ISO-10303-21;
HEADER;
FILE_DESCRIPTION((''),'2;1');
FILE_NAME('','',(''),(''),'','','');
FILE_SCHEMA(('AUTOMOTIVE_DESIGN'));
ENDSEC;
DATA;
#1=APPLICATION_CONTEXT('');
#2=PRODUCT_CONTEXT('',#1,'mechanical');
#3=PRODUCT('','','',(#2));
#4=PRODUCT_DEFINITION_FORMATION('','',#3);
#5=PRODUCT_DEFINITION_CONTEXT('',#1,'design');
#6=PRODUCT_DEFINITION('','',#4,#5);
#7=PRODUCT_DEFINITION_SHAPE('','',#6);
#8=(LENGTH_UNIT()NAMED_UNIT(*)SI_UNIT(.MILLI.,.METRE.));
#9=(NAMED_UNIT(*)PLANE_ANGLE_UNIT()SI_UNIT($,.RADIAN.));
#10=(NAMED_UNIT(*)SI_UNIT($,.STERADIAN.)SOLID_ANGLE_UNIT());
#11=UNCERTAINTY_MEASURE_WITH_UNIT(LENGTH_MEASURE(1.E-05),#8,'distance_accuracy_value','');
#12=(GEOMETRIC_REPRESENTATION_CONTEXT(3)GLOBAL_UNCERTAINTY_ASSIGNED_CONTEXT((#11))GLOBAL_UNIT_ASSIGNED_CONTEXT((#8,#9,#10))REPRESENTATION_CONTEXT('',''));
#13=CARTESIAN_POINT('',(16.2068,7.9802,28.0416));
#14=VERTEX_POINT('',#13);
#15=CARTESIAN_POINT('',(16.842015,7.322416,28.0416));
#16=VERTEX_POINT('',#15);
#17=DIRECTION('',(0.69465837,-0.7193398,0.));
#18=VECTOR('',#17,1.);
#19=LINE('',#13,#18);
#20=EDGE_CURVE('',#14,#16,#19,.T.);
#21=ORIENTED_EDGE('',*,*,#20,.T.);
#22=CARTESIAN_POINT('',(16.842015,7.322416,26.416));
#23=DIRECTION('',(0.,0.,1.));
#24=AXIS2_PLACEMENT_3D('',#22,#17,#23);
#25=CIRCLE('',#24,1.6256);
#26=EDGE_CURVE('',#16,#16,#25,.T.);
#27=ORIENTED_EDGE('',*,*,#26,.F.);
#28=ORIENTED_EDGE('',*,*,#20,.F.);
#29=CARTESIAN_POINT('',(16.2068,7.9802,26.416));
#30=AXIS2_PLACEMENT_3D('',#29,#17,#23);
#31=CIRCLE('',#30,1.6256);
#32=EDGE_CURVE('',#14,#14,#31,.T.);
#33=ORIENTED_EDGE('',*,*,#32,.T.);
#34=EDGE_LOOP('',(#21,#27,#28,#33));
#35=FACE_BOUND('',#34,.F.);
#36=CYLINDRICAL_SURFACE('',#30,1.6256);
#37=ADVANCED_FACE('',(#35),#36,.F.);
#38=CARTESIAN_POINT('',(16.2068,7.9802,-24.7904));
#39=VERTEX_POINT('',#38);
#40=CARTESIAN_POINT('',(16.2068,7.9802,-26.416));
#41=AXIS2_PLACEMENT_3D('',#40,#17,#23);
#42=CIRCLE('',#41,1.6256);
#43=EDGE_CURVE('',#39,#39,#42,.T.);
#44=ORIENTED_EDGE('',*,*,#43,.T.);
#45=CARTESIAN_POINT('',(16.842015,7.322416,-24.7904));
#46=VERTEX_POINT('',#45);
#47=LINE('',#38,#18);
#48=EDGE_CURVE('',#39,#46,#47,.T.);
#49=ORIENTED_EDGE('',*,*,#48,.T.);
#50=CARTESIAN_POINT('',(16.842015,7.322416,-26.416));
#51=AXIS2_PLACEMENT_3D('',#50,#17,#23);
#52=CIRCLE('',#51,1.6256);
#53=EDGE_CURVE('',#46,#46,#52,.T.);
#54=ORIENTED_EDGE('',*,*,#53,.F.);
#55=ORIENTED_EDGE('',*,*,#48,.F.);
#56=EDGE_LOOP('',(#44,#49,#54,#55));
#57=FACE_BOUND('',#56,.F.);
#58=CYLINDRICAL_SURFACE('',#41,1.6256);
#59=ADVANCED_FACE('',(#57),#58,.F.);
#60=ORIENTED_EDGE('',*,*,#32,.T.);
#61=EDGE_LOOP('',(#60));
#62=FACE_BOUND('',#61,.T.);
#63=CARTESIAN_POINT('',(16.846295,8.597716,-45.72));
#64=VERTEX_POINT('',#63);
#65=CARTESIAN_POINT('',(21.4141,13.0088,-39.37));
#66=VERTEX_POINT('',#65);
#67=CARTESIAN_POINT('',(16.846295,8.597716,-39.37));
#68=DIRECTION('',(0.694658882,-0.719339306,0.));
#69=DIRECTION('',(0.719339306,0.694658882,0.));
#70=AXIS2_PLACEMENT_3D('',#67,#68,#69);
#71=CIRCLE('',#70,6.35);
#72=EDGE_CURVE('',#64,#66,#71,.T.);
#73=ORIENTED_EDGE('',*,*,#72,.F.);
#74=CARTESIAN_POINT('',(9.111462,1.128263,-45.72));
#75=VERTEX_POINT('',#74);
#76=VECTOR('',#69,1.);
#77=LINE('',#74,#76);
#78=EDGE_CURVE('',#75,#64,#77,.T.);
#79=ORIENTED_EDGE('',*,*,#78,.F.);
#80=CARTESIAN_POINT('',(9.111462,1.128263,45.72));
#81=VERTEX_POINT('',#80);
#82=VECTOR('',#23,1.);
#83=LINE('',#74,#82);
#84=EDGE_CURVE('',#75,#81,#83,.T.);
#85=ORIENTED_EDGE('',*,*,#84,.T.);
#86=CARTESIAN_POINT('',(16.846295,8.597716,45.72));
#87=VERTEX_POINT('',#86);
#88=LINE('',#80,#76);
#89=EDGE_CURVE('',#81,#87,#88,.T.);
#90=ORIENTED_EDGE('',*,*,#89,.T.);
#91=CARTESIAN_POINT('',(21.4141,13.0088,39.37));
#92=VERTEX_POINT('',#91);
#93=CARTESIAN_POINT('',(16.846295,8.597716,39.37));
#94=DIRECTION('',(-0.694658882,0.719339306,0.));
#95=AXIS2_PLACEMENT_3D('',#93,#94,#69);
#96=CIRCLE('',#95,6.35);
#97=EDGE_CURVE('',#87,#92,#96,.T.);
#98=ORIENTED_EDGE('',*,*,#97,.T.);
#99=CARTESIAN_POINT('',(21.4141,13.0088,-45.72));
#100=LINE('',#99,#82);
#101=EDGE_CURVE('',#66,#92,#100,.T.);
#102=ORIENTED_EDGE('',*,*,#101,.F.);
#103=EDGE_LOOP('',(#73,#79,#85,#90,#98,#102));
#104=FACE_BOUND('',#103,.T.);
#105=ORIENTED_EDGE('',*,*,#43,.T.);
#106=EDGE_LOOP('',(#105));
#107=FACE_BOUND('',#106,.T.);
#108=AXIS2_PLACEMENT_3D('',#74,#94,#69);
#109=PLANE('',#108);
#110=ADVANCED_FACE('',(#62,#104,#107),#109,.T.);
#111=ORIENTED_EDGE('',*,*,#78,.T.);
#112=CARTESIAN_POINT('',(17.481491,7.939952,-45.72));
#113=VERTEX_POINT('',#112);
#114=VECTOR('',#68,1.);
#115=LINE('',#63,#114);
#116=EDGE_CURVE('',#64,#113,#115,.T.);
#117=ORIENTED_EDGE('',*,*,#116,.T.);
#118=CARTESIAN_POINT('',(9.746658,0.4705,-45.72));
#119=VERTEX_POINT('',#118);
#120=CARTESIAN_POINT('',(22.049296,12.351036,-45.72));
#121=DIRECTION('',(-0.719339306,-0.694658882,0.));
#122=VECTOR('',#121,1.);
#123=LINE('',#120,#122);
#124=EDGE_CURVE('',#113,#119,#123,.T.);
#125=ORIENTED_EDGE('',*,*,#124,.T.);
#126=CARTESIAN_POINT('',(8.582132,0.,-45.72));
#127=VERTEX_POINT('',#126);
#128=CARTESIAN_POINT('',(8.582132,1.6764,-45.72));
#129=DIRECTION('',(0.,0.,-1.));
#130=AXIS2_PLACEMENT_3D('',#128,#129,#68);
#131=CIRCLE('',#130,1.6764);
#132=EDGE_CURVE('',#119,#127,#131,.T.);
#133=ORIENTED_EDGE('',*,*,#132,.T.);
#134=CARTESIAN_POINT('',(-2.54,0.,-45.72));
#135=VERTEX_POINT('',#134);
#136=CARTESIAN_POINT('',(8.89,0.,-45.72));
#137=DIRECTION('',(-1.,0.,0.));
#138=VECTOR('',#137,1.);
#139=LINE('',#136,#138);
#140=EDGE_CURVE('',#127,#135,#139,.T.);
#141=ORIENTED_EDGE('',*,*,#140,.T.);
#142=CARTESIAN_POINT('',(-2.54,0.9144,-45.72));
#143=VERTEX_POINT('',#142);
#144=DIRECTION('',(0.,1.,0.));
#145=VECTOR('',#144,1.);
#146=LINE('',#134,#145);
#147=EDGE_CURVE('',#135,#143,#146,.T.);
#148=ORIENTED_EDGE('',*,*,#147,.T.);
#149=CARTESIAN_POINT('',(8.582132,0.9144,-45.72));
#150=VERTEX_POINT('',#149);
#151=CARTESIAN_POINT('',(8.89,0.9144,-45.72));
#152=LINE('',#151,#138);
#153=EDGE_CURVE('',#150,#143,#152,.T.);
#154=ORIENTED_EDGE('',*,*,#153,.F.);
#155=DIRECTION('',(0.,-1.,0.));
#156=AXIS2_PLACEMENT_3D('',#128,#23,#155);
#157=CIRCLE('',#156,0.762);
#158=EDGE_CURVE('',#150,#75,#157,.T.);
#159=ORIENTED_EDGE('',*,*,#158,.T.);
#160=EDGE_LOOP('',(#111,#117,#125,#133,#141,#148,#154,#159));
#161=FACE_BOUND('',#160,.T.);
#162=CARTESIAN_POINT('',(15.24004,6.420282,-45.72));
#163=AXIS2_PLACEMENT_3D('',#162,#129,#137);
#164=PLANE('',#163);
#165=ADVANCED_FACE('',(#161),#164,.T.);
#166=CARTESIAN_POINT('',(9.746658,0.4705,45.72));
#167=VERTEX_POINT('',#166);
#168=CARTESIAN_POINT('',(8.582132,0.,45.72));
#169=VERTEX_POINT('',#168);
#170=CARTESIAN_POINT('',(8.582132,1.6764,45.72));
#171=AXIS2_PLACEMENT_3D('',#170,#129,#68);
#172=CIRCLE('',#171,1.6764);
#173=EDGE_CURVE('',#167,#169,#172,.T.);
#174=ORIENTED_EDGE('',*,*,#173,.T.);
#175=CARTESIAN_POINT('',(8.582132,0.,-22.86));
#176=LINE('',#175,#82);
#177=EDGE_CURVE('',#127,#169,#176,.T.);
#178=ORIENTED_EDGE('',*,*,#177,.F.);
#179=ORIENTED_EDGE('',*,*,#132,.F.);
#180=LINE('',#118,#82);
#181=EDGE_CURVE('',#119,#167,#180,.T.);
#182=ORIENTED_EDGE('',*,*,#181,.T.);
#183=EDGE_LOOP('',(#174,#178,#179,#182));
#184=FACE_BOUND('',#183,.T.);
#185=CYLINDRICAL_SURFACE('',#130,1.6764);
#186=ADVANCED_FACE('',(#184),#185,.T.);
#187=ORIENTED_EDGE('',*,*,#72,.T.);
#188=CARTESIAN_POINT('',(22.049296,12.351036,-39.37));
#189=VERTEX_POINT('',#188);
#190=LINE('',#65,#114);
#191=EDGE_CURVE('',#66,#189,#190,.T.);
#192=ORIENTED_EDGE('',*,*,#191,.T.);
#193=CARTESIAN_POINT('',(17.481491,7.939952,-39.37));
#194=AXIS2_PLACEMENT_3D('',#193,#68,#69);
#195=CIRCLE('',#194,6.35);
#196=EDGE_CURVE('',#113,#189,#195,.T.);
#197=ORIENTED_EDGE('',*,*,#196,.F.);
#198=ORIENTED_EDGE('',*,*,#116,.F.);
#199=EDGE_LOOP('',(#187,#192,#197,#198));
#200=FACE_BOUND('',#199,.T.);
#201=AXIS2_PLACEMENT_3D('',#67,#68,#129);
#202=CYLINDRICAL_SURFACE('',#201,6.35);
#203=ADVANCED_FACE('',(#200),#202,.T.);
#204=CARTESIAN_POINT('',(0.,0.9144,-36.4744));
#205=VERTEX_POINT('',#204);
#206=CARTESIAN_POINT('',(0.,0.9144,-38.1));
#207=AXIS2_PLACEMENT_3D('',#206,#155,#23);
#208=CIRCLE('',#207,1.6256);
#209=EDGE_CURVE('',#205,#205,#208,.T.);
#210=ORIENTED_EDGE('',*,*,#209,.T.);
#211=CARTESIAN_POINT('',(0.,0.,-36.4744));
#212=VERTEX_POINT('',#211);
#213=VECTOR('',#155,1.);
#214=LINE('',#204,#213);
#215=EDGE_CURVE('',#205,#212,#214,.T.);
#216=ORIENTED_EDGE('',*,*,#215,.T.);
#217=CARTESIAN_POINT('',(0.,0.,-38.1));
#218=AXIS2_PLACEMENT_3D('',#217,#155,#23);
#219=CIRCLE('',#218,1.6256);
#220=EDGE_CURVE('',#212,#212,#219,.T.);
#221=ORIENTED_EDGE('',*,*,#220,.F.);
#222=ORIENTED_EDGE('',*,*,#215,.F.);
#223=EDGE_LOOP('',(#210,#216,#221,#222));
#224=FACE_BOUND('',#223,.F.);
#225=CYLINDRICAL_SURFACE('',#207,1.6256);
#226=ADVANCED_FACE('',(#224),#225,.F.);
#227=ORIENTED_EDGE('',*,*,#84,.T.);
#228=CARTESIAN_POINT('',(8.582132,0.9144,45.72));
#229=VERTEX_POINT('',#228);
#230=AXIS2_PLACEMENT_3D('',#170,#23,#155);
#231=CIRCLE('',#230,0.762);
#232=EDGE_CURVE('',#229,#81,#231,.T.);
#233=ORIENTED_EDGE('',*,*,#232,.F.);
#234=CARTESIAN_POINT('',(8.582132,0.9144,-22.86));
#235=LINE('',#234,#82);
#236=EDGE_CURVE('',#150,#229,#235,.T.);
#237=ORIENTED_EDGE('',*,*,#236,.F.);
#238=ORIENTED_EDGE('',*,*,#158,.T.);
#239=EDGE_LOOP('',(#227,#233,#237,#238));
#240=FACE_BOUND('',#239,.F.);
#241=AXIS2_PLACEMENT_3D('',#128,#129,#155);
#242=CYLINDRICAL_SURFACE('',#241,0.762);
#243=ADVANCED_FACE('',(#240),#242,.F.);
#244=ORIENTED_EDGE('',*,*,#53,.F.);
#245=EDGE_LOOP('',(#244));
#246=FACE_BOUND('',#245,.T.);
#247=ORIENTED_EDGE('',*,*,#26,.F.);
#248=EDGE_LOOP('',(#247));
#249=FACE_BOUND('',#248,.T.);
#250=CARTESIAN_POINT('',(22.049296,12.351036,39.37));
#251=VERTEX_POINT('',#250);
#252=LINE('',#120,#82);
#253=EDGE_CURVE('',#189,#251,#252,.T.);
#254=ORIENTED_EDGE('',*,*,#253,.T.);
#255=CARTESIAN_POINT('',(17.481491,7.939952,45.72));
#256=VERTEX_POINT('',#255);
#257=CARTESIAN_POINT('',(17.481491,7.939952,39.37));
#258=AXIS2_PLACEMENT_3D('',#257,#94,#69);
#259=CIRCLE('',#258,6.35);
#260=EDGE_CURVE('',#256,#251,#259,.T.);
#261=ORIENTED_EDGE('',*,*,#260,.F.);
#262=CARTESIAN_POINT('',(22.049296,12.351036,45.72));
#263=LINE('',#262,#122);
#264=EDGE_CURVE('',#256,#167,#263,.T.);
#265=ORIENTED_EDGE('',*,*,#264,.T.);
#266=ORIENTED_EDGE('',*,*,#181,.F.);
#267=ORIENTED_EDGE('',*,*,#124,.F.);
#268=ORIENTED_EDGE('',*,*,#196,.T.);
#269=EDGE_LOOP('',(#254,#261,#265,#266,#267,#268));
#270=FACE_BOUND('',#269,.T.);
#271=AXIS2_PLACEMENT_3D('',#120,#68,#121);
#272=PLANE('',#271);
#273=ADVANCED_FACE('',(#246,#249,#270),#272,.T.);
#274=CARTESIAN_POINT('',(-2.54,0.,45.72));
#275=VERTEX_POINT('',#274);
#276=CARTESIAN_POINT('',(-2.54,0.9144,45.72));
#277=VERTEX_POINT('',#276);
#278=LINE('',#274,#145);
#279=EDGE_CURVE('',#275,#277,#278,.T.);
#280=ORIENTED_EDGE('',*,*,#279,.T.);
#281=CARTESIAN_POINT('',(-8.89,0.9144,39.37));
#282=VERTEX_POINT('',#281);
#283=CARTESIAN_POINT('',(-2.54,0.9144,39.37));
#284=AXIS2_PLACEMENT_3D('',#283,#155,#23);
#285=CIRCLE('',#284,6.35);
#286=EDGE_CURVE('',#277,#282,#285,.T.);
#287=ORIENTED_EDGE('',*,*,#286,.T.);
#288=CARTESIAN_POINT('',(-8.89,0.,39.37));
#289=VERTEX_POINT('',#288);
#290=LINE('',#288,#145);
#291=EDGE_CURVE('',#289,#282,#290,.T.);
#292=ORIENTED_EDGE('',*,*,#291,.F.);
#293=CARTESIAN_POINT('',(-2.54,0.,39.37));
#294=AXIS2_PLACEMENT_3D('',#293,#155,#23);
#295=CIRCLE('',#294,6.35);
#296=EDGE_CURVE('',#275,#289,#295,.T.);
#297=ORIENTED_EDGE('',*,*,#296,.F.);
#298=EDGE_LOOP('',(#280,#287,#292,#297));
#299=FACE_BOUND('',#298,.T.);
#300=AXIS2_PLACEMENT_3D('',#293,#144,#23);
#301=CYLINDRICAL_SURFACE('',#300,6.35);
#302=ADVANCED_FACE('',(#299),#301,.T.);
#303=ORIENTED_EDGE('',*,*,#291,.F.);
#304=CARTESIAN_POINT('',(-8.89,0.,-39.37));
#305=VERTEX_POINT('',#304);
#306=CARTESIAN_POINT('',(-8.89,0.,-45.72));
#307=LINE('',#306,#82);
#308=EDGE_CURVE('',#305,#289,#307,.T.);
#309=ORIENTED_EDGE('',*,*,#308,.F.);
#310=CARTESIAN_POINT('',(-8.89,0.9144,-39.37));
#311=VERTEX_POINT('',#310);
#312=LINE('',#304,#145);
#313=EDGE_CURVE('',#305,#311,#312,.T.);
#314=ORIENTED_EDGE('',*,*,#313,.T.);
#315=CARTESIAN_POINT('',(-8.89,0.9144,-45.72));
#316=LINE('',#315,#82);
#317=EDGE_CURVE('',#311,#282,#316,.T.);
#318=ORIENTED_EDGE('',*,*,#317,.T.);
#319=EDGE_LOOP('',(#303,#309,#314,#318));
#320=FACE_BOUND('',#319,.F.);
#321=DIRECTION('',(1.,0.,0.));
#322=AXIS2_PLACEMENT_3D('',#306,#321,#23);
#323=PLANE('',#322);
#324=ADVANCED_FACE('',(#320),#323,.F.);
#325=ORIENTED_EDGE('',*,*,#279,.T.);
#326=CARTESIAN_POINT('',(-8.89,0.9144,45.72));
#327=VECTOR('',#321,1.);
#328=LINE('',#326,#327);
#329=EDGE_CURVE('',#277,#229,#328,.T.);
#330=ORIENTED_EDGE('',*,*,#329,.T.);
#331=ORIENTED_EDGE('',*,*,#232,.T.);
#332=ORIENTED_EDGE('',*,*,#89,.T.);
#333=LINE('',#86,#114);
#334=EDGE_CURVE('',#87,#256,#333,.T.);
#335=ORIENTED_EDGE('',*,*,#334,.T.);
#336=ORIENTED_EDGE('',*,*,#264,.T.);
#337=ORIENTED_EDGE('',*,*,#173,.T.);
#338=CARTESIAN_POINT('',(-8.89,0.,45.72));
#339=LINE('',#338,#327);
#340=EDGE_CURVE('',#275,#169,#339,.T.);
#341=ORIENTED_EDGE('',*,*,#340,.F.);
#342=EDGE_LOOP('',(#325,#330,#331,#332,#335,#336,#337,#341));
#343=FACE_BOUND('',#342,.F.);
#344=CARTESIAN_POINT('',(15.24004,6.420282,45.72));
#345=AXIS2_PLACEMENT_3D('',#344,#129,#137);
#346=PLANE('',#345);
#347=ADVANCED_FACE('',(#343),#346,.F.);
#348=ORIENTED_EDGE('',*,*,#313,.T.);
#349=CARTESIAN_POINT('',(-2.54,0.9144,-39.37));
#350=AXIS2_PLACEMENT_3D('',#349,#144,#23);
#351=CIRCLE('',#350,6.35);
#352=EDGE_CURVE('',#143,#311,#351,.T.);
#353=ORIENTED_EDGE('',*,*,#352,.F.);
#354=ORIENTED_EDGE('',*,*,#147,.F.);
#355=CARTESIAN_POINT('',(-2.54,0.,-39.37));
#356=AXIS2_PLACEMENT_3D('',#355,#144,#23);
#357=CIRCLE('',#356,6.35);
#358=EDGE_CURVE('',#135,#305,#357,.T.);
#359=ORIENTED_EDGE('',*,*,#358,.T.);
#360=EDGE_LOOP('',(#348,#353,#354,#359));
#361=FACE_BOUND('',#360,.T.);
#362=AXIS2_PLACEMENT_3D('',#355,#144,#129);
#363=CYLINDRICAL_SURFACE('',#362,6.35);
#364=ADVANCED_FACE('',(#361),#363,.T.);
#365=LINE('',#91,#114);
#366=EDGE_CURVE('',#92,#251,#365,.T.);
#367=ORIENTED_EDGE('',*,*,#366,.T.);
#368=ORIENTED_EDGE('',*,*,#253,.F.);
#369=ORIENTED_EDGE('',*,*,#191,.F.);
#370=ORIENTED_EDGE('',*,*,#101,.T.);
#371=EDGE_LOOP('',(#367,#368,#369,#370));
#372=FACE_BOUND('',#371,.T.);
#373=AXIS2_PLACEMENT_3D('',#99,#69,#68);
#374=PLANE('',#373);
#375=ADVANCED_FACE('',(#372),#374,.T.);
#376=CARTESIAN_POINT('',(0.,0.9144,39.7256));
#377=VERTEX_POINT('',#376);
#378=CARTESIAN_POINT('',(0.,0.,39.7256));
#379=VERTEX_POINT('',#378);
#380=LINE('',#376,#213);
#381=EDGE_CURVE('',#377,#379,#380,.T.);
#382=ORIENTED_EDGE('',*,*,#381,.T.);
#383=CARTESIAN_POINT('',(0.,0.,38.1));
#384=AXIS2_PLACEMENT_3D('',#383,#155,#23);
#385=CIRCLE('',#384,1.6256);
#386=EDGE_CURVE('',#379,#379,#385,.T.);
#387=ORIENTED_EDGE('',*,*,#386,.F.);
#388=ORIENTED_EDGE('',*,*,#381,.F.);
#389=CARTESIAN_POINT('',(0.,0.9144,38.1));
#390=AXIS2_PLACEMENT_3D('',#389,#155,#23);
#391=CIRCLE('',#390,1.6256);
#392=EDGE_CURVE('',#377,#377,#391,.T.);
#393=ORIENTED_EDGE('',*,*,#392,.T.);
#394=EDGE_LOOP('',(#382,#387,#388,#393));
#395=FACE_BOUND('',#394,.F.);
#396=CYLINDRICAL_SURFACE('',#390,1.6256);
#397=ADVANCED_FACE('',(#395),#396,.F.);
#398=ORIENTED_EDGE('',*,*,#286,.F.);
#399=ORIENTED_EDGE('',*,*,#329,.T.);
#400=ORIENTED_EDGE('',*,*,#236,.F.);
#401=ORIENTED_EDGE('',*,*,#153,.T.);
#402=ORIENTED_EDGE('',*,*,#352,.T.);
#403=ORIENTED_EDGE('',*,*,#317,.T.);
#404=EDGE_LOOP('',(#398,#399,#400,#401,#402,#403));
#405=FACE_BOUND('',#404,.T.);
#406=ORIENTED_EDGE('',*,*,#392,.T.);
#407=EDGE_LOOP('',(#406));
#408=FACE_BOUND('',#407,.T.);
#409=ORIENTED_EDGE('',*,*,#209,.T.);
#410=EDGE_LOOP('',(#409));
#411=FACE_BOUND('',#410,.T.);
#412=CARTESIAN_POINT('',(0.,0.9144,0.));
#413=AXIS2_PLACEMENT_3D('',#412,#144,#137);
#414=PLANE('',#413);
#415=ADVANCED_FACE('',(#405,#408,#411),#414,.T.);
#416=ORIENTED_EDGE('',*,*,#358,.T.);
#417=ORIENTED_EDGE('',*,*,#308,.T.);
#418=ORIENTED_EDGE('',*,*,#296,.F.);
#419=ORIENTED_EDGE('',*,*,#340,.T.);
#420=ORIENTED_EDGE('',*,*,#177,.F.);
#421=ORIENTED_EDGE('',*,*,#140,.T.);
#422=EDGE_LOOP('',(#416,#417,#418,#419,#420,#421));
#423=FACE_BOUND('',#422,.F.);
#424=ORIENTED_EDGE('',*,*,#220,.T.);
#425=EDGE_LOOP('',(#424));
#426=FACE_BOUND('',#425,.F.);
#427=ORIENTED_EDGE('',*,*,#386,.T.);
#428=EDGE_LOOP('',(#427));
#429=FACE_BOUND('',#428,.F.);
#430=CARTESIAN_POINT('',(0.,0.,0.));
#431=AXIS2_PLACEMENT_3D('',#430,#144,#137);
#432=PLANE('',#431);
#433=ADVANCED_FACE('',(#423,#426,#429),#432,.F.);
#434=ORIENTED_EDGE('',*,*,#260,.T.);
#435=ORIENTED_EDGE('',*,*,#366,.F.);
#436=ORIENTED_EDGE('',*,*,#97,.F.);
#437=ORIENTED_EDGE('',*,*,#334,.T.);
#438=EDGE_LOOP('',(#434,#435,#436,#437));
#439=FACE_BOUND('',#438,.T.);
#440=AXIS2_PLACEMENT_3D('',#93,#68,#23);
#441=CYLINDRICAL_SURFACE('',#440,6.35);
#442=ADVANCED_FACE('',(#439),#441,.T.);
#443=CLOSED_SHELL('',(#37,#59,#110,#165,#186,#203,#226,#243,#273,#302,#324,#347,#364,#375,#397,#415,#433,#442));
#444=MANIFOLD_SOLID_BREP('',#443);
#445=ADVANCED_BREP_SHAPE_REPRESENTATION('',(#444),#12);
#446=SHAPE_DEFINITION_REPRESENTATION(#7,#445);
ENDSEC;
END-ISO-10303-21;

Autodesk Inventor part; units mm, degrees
ref_plane "YZ Plane" through (0, 0, 0) normal (1, 0, 0) x (0, 1, 0)
ref_plane "XZ Plane" through (0, 0, 0) normal (0, 1, 0) x (-1, 0, 0)
ref_plane "XY Plane" through (0, 0, 0) normal (0, 0, 1) x (1, 0, 0)
sketch "Sketch1" plane through (0, 0, 0) normal (0, 1, 0) x (-1, 0, 0)
  line L0 (-8.89, -45.72) -> (8.89, -45.72)
  line L1 (8.89, -45.72) -> (8.89, 45.72)
  line L2 (8.89, 45.72) -> (-8.89, 45.72)
  line L3 (-8.89, 45.72) -> (-8.89, -45.72)
  line L4 (-8.89, -45.72) -> (8.89, 45.72) construction
  line L5 (8.89, -45.72) -> (-8.89, 45.72) construction
  point P0 (0, 0)
  dimension "d0" = 17.78
  dimension "d1" = 91.44
extrude "Plate1" add sketch "Sketch1" along normal blind 0.9144
sketch "Sketch2" plane through (8.89, 0.9144, -45.72) normal (0.6946584, -0.7193398, 0) x (0.7193398, 0.6946584, 0)
  line L0 (0, 91.44) -> (0, 0)
  line L1 (0, 0) -> (17.4106, 0)
  line L2 (17.4106, 0) -> (17.4106, 91.44)
  line L3 (17.4106, 91.44) -> (0, 91.44)
edge flange "Flange1" height 17.78 angle 44 thickness 0.9144 bend radius 0.762 thickness toward (0.6946584, -0.7193398, 0) relief tear relief width 0.9144 relief depth 0.4572 edges at (8.89, 0.9144, 0) wall of the first edge with corners at (8.89, 0.9144, 45.72) (8.89, 0.9144, -45.72) (21.4141, 13.0088, -45.72) (21.4141, 13.0088, 45.72)
bend "Bend1"
corner "Corner1"
sketch "Sketch3" plane through (0, 0.9144, 0) normal (0, 1, 0) x (1, 0, 0)
  line L0 (-14.9938, 0) -> (27.733, 0) projected
  line L1 (-8.89, -45.72) -> (-8.89, 45.72) projected
  point P0 (0, 0)
  point P1 (0, 38.1)
  point P2 (0, -38.1)
  dimension "d13" = 76.2
  dimension "d14" = 8.89
hole "Hole1" at (0, 0.9144, -38.1) at (0, 0.9144, 38.1) direction (0, -1, 0) diameter 3.2512 end through all
sketch "Sketch4" plane through (21.4141, 13.0088, -45.72) normal (-0.6946584, 0.7193398, 0) x (0, 0, 1)
  line L0 (91.44, 0) -> (0, 0) projected
  line L1 (45.72, -40.2779) -> (45.72, 7.2461) projected
  point P0 (45.72, -24.4407)
  point P1 (19.304, -7.239)
  point P2 (72.136, -7.239)
  dimension "d22" = 7.239
  dimension "d23" = 52.832
hole "Hole2" at (16.2068, 7.9802, -26.416) at (16.2068, 7.9802, 26.416) direction (0.6946584, -0.7193398, 0) diameter 3.2512 end through all
fillet "Corner Round1" radius 6.35 4 edges at (-8.89, 0.4572, 45.72) (21.7317, 12.6799, -45.72) (-8.89, 0.4572, -45.72) (21.7317, 12.6799, 45.72)
equation "\"d20\" = Thickness"
equation "\"d29\" = Thickness"
equation "\"d2\" = Thickness"
equation "\"d3\" = BendReliefWidth"
equation "\"d4\" = BendReliefDepth"
equation "\"d5\" = MinimumRemnant"
equation "\"d6\" = TransitionRadius"
equation "\"d9\" = BendRadius"
equation "\"d10\" = CornerReliefSize"
equation "\"d11\" = GapSize"
equation "\"d12\" = JacobiRadiusSize"
equation "\"BendReliefWidth\" = Thickness"
equation "\"BendReliefDepth\" = 0.5 * Thickness"
equation "\"CornerReliefSize\" = 4 * Thickness"
equation "\"MinimumRemnant\" = 2 * Thickness"
equation "\"TransitionRadius\" = BendRadius"
equation "\"JacobiRadiusSize\" = BendRadius"
equation "\"GapSize\" = Thickness"
equation "\"Thickness\" = 0.9144"
equation "\"BendRadius\" = 0.762"
properties part number "J009600" material "STAINLESS STEEL, 316"
